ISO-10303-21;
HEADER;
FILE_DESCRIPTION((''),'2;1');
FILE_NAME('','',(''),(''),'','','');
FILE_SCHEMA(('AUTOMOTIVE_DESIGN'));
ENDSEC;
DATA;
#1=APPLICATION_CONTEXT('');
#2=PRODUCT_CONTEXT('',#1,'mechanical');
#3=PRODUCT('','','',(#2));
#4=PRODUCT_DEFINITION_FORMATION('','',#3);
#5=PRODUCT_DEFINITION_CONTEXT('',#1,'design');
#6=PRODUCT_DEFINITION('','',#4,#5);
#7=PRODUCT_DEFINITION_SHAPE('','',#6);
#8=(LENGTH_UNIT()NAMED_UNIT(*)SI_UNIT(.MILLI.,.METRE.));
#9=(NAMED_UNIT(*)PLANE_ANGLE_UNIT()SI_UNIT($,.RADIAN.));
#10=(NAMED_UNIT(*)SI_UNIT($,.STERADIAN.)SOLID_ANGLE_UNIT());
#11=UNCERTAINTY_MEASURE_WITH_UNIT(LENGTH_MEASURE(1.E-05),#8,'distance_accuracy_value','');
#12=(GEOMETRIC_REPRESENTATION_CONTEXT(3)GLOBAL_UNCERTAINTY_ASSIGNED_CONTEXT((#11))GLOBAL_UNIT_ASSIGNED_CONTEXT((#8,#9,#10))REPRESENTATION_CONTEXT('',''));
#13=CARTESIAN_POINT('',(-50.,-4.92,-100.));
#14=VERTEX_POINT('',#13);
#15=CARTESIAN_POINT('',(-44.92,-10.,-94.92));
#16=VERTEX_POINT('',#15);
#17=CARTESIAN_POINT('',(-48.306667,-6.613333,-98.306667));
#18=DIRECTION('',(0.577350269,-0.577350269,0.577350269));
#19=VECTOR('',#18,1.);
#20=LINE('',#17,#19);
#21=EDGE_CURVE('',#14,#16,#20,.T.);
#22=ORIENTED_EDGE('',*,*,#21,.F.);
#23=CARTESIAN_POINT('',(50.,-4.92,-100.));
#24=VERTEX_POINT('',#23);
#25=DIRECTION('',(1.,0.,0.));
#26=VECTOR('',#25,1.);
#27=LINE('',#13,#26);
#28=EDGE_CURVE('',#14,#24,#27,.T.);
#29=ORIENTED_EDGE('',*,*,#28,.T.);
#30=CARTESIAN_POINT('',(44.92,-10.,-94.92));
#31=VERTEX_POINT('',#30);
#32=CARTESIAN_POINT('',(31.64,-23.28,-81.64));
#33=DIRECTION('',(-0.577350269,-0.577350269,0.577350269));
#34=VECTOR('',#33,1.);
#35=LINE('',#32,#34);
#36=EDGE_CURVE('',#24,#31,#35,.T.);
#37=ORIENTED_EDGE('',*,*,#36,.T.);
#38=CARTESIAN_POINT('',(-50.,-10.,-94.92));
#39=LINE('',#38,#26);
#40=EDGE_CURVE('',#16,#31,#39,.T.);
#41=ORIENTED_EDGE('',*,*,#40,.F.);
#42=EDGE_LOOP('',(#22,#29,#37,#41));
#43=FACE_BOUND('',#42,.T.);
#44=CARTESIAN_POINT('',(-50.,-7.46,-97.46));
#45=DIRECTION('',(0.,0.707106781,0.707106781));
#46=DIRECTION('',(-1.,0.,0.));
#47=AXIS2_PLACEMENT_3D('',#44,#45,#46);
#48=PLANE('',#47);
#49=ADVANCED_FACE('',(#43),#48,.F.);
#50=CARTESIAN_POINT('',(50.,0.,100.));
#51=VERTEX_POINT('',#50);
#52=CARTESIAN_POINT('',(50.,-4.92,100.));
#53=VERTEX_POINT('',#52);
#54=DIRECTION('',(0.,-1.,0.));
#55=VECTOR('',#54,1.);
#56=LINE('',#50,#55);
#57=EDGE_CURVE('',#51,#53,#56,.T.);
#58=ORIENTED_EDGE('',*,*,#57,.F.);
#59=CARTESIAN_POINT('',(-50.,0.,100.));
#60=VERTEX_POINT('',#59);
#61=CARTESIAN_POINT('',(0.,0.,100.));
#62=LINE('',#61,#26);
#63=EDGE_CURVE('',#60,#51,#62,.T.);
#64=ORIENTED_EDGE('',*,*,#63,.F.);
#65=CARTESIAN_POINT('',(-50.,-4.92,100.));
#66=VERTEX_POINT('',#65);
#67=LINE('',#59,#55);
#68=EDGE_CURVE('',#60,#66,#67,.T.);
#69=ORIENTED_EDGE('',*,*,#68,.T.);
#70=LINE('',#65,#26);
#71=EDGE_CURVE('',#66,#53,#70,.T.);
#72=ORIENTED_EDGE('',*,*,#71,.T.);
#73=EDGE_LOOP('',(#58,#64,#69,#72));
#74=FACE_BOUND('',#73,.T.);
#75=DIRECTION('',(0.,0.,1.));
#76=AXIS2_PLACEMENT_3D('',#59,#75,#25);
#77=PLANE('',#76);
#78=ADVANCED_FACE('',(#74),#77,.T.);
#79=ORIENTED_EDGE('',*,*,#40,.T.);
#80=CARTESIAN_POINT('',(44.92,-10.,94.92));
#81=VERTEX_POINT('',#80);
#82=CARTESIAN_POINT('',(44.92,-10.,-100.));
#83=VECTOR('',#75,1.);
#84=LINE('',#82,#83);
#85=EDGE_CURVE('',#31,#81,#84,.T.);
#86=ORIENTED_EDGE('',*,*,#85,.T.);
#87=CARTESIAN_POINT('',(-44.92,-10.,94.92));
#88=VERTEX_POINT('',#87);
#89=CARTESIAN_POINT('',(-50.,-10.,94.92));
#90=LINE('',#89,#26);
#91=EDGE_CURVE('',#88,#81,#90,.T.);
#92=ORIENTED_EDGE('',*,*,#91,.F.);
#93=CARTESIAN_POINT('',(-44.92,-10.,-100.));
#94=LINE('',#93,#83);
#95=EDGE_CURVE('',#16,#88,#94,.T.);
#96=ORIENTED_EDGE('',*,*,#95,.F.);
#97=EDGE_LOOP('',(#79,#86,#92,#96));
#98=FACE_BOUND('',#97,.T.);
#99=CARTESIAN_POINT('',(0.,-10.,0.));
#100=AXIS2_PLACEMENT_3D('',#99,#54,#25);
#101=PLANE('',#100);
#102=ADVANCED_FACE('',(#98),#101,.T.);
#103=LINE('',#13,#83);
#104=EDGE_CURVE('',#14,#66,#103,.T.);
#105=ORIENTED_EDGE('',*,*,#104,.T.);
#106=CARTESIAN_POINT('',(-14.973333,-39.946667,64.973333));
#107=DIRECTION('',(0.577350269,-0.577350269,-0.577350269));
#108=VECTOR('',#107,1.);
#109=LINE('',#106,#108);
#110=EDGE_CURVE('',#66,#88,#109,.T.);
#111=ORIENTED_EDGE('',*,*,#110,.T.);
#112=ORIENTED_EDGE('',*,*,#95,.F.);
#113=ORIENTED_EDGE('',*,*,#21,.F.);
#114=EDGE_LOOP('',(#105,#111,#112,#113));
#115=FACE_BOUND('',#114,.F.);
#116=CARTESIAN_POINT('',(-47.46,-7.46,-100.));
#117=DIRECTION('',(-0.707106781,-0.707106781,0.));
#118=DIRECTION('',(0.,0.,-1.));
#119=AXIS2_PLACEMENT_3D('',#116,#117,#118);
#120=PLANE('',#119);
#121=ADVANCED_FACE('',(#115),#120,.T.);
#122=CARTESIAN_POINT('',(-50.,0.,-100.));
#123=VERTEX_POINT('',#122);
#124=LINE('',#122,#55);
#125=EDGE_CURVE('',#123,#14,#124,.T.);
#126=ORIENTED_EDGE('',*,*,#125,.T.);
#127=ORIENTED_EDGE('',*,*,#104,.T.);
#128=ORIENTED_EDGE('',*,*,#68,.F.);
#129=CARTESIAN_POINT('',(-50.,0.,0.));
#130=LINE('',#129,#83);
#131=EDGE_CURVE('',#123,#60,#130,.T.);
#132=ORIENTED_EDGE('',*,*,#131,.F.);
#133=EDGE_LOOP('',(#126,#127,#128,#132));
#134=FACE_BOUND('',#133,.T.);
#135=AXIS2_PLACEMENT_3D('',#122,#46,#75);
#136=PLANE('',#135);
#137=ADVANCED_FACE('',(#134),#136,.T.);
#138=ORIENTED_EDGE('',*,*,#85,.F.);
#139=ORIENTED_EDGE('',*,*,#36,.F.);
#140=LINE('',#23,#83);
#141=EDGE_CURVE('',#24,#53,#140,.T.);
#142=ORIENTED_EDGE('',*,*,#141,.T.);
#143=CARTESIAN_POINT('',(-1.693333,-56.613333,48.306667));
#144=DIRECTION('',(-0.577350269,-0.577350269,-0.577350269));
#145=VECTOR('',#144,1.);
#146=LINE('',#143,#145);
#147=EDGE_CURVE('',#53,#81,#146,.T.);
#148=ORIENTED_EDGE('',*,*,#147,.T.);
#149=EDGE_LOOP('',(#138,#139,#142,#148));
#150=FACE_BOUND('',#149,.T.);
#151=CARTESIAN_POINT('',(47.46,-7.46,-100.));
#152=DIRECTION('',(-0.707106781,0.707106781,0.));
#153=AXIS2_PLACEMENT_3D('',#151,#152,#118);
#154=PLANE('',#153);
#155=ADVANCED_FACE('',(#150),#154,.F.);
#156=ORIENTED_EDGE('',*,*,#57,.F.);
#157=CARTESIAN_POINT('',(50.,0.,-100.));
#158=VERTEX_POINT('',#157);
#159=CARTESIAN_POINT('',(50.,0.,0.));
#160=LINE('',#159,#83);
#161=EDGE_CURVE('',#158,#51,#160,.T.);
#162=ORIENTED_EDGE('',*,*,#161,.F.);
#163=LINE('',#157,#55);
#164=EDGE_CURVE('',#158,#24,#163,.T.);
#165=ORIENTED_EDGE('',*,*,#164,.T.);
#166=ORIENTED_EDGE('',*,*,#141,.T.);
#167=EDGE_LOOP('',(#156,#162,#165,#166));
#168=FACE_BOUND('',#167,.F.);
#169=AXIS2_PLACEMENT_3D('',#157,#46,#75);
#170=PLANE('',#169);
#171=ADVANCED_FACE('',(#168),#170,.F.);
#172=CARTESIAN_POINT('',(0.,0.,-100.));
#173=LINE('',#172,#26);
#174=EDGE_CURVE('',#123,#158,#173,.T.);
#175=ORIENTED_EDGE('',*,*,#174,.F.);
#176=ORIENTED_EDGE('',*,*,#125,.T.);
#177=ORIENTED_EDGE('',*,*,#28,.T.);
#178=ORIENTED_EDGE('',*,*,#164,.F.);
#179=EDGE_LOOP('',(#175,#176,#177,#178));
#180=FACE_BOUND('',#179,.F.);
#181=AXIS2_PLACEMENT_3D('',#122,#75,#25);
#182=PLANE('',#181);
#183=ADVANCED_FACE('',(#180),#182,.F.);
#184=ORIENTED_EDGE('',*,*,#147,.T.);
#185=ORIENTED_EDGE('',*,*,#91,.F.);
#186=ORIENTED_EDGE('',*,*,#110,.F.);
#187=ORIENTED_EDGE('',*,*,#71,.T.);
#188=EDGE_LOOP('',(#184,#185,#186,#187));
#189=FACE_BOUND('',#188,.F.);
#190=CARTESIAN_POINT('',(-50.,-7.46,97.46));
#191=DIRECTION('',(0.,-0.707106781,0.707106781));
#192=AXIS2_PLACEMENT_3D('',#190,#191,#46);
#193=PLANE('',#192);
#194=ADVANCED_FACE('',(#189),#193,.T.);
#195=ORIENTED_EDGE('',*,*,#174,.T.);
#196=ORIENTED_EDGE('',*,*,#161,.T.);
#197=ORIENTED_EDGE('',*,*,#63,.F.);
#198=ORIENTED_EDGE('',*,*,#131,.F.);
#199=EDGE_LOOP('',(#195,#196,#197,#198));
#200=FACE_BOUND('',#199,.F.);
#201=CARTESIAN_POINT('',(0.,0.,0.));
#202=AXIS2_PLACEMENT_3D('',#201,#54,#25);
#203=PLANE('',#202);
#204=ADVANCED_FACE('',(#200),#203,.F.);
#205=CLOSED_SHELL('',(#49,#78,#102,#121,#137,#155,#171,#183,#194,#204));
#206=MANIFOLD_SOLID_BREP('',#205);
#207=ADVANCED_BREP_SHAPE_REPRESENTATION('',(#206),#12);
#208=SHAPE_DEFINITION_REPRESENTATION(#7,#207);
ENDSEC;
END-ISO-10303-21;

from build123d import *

# Parameters (mm, degrees)
F0_W     = 100
F0_H     = 200
F1_DEPTH = 10
F2_SIZE  = 5.08


# Not quite as in the source:
# - the program builds the solid bodies; features that only make, move or delete a surface that nothing else refers to are left out


with BuildPart() as f1:
    # F0 (on Front) → F1 (new body)
    with BuildSketch(Plane.XZ):
        Rectangle(F0_W, F0_H)
    extrude(amount=F1_DEPTH)

    # F2
    f2_edges = [f1.edges().sort_by_distance(p)[0] for p in [
        (-50, -10, 0),
        (0, -10, 100),
        (0, -10, -100),
        (50, -10, 0),
    ]]
    chamfer(f2_edges, length=F2_SIZE)


solid = f1.part
